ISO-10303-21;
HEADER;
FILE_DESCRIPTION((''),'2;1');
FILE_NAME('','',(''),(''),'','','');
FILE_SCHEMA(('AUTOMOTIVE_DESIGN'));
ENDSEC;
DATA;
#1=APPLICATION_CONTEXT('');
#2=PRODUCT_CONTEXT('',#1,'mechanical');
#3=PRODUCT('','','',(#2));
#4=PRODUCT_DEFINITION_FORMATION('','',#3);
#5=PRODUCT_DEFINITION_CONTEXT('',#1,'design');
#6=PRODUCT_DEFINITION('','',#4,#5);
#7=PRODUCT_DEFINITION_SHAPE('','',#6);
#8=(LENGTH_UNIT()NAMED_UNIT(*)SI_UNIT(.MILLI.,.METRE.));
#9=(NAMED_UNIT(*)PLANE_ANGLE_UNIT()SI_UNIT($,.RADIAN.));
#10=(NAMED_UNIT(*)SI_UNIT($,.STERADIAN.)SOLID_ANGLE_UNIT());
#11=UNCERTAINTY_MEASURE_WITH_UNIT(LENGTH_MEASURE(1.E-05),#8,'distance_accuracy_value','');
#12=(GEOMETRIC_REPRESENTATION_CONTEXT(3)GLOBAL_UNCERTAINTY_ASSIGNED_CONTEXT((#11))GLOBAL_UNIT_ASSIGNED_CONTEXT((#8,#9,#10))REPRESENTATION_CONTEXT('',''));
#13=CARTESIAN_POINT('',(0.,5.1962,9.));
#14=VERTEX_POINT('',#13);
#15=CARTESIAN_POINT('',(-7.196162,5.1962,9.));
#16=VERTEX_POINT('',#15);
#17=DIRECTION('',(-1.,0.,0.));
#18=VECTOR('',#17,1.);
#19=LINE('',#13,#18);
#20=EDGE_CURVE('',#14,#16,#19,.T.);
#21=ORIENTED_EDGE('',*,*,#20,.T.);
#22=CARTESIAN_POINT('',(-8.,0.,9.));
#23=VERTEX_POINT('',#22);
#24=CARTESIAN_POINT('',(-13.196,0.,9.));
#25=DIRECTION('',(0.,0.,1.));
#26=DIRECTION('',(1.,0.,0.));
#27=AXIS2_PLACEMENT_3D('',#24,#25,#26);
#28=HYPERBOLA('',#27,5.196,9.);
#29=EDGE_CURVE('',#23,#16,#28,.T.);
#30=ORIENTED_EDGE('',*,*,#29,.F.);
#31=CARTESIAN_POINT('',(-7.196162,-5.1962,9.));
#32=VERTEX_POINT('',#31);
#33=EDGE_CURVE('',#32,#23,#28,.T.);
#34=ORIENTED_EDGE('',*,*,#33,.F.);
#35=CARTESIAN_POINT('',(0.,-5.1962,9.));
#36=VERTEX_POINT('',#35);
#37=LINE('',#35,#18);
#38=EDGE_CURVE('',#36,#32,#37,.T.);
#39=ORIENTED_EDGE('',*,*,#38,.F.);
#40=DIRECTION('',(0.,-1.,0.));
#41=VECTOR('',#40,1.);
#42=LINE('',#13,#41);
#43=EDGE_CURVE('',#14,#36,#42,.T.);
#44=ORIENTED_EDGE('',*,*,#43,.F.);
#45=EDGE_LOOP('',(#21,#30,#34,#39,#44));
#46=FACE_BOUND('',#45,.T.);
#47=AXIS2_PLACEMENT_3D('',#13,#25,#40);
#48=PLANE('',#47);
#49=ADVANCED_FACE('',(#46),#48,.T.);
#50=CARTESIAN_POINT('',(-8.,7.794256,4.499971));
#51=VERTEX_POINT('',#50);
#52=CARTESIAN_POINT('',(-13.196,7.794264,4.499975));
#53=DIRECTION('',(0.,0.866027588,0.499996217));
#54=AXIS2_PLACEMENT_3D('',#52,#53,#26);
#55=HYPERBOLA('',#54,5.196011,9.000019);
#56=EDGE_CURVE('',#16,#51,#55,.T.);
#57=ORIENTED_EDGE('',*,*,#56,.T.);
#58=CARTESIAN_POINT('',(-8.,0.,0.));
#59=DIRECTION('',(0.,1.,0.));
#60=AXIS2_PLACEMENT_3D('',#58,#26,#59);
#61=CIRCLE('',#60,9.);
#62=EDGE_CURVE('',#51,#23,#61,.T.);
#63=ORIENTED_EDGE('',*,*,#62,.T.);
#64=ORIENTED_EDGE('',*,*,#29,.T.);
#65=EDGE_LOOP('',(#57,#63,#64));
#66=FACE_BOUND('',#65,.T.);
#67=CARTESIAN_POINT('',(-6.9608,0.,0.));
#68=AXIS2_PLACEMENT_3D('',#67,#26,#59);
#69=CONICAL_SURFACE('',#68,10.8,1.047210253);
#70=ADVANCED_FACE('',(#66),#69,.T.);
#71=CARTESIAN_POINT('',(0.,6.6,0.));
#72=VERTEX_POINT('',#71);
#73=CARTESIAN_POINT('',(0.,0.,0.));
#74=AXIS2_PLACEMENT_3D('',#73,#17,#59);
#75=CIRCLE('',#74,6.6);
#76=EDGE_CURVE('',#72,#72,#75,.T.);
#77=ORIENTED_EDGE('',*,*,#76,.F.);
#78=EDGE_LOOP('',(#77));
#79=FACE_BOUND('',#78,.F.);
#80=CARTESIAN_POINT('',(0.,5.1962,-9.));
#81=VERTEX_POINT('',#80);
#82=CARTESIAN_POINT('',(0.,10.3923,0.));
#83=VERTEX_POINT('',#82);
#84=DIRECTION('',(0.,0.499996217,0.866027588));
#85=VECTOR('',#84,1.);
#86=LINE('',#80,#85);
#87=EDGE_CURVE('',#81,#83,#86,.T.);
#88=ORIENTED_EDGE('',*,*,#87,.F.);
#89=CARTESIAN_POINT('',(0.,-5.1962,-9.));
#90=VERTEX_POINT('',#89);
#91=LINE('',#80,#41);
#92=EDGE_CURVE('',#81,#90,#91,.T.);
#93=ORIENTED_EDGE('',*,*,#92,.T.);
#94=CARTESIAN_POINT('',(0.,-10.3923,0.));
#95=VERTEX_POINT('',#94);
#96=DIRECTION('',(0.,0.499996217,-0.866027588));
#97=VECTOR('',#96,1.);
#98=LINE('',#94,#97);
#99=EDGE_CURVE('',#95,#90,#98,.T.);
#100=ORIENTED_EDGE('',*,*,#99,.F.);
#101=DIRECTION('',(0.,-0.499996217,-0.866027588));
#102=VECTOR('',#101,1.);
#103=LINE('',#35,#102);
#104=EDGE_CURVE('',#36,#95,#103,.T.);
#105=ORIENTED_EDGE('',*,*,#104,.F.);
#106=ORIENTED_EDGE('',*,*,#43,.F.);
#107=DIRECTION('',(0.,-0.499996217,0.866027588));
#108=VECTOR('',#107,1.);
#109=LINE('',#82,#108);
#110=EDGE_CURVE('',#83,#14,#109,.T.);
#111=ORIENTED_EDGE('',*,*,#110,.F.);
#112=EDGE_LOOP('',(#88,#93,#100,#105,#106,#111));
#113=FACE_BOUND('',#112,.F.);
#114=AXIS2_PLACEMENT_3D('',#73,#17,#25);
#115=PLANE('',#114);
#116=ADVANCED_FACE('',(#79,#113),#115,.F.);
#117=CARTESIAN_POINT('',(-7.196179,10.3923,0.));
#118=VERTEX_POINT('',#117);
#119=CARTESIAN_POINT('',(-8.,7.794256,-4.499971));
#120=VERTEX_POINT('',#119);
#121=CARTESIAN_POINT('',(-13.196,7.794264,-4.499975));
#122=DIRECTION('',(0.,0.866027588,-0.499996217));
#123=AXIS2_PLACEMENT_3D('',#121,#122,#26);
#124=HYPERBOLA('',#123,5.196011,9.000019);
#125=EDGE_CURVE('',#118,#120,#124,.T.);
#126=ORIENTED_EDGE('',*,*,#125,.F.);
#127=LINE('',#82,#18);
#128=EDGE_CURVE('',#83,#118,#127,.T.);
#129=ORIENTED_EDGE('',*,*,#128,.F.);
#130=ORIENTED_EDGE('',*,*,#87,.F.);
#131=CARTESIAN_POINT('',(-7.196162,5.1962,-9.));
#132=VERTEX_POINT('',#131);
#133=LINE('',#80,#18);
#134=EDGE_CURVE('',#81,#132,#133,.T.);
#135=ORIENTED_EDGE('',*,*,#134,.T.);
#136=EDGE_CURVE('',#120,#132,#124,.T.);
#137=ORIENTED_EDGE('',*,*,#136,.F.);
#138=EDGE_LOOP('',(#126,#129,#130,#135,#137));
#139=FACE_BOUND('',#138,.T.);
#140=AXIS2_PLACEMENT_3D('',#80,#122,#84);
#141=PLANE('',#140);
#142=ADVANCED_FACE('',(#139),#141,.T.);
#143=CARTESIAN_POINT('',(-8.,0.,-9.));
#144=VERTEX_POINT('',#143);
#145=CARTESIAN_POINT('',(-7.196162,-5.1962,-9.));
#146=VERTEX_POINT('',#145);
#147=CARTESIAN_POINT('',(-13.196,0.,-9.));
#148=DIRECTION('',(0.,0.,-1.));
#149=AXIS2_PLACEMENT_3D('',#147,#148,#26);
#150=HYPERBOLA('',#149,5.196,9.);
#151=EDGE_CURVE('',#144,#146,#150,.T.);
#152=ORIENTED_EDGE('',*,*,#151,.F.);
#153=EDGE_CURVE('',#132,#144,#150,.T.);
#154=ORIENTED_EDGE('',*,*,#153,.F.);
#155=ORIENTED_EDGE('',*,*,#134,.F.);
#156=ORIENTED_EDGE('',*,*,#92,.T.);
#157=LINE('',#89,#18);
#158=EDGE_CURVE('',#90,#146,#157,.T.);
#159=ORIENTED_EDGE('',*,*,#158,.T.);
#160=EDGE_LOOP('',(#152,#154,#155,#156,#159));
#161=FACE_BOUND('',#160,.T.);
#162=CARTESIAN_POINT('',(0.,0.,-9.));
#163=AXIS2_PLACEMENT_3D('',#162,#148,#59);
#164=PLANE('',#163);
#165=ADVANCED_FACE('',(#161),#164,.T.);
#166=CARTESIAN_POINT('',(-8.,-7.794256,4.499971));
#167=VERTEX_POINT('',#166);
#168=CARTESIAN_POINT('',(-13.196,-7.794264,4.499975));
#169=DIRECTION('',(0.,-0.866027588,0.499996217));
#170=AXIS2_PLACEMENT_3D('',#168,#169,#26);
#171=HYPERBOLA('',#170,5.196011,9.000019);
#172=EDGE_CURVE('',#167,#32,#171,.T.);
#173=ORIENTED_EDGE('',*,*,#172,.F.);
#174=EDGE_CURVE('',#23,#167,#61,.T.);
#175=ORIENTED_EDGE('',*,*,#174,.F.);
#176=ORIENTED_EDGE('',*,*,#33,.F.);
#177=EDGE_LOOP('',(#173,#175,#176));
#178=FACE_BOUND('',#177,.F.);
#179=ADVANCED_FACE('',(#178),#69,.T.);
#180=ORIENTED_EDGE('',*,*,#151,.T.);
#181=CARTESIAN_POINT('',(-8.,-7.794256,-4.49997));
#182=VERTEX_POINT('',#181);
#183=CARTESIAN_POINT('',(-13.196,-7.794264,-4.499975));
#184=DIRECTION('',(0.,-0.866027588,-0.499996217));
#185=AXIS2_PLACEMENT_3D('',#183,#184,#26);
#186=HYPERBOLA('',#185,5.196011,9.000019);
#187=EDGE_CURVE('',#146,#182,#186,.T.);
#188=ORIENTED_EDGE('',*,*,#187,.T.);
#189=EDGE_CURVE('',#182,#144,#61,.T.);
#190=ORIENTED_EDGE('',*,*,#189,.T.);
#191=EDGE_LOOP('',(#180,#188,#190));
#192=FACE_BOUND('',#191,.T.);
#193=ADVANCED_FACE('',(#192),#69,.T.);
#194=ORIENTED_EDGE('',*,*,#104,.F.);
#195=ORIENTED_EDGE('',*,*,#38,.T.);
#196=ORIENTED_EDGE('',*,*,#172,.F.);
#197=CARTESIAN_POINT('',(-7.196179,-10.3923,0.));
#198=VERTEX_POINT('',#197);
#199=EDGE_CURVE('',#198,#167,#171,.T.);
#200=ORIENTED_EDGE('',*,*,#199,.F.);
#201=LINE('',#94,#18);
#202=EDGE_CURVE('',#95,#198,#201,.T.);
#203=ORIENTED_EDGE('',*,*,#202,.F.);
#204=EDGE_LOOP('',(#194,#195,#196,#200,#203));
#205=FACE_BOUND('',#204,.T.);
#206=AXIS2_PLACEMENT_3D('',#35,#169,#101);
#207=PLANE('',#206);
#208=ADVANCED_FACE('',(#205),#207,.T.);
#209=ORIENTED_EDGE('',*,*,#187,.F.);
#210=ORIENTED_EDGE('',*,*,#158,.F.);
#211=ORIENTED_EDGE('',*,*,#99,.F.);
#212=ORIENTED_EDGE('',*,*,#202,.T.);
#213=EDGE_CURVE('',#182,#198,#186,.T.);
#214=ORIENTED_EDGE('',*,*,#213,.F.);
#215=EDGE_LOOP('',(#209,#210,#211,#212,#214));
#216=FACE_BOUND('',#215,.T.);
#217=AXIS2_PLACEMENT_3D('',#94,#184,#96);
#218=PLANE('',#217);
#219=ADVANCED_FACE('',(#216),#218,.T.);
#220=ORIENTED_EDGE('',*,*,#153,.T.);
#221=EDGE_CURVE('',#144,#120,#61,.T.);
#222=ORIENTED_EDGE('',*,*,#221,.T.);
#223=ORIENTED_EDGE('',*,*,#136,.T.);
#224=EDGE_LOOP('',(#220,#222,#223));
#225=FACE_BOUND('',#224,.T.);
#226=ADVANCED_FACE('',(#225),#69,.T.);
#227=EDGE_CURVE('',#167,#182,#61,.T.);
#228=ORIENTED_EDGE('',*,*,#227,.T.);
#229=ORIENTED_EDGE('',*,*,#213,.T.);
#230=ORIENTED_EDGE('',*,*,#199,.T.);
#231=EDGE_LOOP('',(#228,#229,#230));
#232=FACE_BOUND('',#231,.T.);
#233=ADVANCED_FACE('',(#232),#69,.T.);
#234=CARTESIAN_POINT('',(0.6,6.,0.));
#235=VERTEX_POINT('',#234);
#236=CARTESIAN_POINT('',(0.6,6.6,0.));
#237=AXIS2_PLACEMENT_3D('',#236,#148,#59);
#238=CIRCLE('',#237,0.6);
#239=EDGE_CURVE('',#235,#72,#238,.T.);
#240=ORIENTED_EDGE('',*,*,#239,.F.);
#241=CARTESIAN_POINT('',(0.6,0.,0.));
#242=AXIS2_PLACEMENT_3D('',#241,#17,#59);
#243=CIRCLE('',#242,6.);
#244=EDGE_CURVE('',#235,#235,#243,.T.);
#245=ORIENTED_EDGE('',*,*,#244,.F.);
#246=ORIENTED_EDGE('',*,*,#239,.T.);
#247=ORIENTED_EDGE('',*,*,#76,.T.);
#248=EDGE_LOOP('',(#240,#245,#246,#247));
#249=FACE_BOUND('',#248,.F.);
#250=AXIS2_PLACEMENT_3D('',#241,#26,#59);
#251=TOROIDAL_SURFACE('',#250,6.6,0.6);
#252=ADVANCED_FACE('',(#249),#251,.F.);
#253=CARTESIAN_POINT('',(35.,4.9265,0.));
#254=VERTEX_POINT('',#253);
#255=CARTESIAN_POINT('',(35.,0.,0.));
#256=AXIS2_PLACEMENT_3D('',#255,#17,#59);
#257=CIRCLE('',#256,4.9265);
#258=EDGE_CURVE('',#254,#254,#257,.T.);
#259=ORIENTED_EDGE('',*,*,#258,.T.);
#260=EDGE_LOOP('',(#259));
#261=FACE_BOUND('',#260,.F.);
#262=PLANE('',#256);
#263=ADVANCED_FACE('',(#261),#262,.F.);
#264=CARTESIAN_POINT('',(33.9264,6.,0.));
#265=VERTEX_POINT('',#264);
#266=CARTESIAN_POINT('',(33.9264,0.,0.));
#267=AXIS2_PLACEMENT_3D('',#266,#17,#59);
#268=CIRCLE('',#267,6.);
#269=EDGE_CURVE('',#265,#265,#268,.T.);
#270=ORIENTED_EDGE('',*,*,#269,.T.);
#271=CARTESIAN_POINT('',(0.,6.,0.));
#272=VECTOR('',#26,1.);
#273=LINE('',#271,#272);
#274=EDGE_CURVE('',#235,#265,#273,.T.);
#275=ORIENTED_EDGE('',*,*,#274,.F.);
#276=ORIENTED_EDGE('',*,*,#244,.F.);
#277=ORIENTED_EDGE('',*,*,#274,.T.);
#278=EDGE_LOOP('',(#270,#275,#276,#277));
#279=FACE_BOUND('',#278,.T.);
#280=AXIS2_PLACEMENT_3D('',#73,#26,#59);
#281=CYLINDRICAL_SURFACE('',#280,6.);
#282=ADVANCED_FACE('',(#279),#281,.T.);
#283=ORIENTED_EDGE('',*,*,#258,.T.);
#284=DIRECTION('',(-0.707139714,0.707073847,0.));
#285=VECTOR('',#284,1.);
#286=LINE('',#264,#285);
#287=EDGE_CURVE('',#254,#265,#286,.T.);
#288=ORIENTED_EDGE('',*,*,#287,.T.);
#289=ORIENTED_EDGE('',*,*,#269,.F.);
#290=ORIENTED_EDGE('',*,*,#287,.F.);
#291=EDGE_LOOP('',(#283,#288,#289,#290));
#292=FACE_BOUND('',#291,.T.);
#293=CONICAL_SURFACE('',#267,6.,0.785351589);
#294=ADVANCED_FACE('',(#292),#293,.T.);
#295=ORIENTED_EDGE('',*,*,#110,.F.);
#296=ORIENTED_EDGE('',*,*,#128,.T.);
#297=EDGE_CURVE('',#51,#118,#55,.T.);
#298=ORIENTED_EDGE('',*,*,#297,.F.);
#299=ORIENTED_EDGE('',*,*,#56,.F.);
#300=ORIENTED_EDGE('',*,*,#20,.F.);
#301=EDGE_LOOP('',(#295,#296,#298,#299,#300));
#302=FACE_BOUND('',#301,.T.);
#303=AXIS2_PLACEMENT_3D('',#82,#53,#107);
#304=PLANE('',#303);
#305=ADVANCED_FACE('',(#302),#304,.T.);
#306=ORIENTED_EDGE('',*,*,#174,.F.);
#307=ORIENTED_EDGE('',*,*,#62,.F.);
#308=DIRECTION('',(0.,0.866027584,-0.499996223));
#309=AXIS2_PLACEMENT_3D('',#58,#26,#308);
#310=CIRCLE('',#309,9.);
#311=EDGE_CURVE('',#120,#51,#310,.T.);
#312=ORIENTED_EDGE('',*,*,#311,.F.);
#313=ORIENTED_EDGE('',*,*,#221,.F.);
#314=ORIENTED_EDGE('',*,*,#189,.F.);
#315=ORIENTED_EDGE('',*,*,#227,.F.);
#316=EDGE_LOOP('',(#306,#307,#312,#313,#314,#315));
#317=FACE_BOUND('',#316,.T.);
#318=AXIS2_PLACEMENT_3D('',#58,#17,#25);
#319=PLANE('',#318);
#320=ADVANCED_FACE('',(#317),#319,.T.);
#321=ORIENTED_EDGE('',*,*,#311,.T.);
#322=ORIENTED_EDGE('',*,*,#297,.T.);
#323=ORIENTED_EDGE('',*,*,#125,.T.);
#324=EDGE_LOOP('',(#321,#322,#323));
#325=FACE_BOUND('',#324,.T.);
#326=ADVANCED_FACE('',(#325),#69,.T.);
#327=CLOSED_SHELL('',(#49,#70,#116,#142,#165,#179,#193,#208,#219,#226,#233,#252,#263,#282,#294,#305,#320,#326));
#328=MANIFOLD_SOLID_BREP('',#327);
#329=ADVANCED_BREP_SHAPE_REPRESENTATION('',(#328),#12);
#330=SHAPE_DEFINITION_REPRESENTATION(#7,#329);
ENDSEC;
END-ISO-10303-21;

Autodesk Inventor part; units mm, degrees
ref_plane "YZ Plane" through (0, 0, 0) normal (1, 0, 0) x (0, 1, 0)
ref_plane "XZ Plane" through (0, 0, 0) normal (0, 1, 0) x (-1, 0, 0)
sketch "Skizze1" plane through (0, 0, 0) normal (0, 0, 1) x (1, 0, 0)
  line L0 (0, 6) -> (35, 6)
  line L1 (35, 6) -> (35, 0)
  line L2 (35, 0) -> (0, 0)
  line L3 (-7, 0) -> (42, 0) projected
  line L4 (0, -1.2) -> (0, 7.2) projected
  line L5 (0, 6) -> (0, 0)
  dimension "d2" = 12
  dimension "d59" = 35
revolve "Körper" add sketch "Skizze1" angle 360 about axis through (35, 0, 0) along (-1, 0, 0)
sketch "Skizze2" plane through (0, 0, 0) normal (-1, 0, 0) x (0, 0, 1)
  line L0 (0, 10.3923) -> (9, 5.1962)
  line L1 (9, 5.1962) -> (9, -5.1962)
  line L2 (9, -5.1962) -> (0, -10.3923)
  line L3 (0, -10.3923) -> (-9, -5.1962)
  line L4 (-9, -5.1962) -> (-9, 5.1962)
  line L5 (-9, 5.1962) -> (0, 10.3923)
  line L6 (-12.6, 0) -> (12.6, 0) projected
  line L7 (0, 14.5492) -> (0, -14.5492) projected
  point P0 (0, 0)
  point P1 (0, 0)
  dimension "d11" = 18
extrude "Kopf" add sketch "Skizze2" along normal blind 8
sketch "Skizze4" plane through (0, 0, 0) normal (0, 0, 1) x (1, 0, 0)
  line L0 (-6.9608, 10.8) -> (-8, 9)
  line L1 (-1.1, 0) -> (-0.234, 0)
  line L2 (-9.5532, 0) -> (1.3192, 0) projected
  line L3 (-8, 10.8) -> (-6.9608, 10.8)
  line L4 (-8, 9) -> (-8, 10.8)
  line L5 (0, 12.96) -> (0, -2.16) projected
  dimension "d65" = 18
  dimension "d67" = 30
  dimension "d68" = 21.6
  dimension "d69" = 8
revolve "Fase1" cut sketch "Skizze4" angle 360 about axis through (-1.1, 0, 0) along (1, 0, 0)
thread "Gewinde" size "M12x1.75" class "6g" standard "ISO Metric profile" length 20.5
chamfer "Fase2" distance 1.0735 distance2 1.0736 1 edges at (35, -6, 0) measured on face at (35, -1.5551, -0.8476)
fillet "Fillet2" radius 0.6 1 edges at (0, -6, 0)
ref_plane "Work Plane1" through (1.525, 0, 0) normal (0, 0, 1) x (1, 0, 0)
equation "\"d71\" = RR"
equation "\"d11\" = SW"
equation "\"d3\" = KOH"
equation "\"d6\" = -0.5 * SPD + 0.5 * GD"
equation "\"d15\" = GEL"
equation "\"d2\" = GD"
equation "\"d59\" = NLG"
equation "\"d65\" = SW"
equation "\"d67\" = ANG1"
equation "\"d68\" = 1.2 * SW"
equation "\"d69\" = KOH"
equation "\"NLG\" = 35"
equation "\"GD\" = NND"
equation "\"BDM\" = NND"
equation "\"KOH\" = 8"
equation "\"GEL\" = 20.5"
equation "\"SW\" = 18"
equation "\"SW0\" = SW"
equation "\"SPD\" = NND - 1.2269 * PTC"
equation "\"SD2\" = NND"
equation "\"SD\" = 0"
equation "\"ANG1\" = 30deg"
equation "\"GAL\" = 0.61345 * PTC"
equation "\"GUL\" = 0.61345 * PTC"
equation "\"RR\" = 0.6"
equation "\"RR1\" = 0.1"
equation "\"GD1\" = THREADDIA - 1.2269 * PTC"
equation "\"THREADDIA\" = 12"
equation "\"SDH\" = NND"
equation "\"TOA\" = 30deg"
equation "\"PTC\" = 1.75"
equation "\"NND\" = 12"
equation "\"E0\" = 1.155 * SW"
equation "\"K1\" = 5.28"
properties part number "DIN 7990 - M12 x 35" material "Stahl, weich"
